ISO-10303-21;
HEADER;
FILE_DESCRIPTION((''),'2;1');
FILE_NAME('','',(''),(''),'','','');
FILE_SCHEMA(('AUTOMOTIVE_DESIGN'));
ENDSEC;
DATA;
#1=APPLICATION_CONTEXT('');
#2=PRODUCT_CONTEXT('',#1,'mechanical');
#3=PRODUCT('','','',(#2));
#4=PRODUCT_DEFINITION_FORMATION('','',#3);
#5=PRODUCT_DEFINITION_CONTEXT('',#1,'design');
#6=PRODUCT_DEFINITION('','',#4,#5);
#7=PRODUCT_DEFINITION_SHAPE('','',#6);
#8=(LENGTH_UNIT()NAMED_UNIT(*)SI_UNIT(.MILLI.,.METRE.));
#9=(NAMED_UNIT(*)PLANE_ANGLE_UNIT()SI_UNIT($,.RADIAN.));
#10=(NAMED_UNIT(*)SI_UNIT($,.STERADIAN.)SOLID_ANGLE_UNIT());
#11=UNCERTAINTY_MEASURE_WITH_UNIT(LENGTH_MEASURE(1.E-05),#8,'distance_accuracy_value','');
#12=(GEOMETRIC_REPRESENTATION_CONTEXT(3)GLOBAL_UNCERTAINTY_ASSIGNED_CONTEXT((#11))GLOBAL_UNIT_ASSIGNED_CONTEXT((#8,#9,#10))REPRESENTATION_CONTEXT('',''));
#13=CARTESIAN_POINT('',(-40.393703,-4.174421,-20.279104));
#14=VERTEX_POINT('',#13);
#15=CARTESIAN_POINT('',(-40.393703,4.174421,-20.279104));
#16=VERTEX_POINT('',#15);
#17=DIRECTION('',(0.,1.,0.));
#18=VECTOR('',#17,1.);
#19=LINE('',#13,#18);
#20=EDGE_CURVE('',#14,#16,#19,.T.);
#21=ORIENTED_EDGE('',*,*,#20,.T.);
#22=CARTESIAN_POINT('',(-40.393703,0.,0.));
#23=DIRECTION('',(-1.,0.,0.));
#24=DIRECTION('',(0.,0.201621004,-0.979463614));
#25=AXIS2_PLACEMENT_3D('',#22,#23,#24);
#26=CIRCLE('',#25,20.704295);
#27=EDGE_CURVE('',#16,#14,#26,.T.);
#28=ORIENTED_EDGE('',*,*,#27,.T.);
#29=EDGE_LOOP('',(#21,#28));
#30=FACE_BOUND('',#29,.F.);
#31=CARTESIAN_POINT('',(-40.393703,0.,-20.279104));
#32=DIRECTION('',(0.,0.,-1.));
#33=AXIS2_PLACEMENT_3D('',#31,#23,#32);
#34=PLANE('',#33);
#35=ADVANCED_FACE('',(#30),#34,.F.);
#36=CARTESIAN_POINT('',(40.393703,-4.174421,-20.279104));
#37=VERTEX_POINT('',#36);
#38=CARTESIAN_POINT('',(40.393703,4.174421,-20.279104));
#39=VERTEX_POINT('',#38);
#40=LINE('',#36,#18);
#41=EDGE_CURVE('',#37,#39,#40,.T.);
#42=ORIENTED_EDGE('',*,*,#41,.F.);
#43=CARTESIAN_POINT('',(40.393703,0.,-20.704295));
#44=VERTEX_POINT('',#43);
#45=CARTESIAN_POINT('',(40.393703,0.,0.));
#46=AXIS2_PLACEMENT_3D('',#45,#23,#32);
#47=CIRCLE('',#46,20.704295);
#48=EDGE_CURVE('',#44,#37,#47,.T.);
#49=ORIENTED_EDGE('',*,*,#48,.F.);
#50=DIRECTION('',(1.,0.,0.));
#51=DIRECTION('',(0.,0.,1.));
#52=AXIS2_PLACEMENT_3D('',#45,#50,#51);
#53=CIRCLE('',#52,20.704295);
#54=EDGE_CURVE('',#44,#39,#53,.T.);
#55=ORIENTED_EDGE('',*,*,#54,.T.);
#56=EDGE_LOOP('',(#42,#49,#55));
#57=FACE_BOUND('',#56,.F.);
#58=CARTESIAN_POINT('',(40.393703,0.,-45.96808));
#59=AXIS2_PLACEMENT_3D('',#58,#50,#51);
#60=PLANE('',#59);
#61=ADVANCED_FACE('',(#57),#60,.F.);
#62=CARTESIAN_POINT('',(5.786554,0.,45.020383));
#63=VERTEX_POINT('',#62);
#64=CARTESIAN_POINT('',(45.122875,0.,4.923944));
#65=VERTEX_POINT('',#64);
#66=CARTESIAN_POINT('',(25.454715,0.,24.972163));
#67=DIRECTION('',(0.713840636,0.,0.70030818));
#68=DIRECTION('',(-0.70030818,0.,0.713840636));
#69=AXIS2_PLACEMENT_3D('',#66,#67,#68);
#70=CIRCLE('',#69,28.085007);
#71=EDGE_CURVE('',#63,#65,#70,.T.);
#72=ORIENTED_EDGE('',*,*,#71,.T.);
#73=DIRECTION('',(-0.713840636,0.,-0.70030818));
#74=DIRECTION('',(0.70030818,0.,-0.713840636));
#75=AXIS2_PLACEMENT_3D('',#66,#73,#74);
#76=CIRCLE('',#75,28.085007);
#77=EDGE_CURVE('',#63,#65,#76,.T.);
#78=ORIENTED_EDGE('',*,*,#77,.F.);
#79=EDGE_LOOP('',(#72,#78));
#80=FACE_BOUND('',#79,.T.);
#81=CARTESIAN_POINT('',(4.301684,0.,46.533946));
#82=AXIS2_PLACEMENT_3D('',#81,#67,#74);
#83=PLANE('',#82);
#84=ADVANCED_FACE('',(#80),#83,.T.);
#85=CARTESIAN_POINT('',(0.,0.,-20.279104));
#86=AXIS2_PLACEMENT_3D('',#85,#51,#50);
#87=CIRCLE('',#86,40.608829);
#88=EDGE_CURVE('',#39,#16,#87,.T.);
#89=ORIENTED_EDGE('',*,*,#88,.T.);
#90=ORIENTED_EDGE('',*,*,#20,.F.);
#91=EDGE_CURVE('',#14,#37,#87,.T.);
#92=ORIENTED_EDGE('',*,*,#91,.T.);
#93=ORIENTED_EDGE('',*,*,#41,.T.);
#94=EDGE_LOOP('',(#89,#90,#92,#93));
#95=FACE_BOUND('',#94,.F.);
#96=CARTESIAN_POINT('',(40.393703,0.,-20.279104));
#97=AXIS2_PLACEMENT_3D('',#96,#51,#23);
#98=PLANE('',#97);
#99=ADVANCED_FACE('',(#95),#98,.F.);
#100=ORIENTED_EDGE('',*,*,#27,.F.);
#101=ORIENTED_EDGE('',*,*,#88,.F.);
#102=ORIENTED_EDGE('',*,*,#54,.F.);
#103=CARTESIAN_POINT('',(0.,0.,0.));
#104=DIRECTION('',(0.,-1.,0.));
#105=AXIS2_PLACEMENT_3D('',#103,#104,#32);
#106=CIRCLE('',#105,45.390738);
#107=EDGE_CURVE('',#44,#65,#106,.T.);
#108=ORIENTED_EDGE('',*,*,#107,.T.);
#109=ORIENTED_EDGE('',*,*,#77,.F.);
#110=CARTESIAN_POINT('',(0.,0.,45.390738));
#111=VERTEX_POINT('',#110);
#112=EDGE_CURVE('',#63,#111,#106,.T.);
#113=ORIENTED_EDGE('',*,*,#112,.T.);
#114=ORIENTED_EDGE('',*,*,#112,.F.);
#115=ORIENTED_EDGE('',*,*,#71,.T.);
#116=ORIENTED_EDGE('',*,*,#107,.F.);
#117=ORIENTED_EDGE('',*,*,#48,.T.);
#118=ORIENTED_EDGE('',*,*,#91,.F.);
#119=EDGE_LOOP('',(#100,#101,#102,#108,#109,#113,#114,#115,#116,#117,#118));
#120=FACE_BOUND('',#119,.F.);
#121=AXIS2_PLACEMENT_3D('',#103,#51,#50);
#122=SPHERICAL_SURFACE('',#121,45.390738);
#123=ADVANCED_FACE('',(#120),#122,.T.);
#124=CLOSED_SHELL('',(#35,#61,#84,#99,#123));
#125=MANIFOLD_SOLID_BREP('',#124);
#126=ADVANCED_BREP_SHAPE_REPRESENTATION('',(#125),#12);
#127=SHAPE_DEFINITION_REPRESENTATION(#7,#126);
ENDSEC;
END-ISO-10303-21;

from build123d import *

# Parameters (mm, degrees)
F4_DEPTH      = 45.391737605
F4_DEPTH_BACK = 45.391737605
F6_DEPTH      = 45.391737605
F7_DEPTH      = 45.391737605


with BuildPart() as f2:
    # F0 (on Front) → F2 (revolve)
    with BuildSketch(Plane.XZ):
        with BuildLine():
            Line((0, 45.390737605), (0, -45.390737605))
            ThreePointArc((0, -45.390737605), (45.390737605, 0), (0, 45.390737605))
        make_face()
    revolve(axis=Axis((0, 0, -0.1771636307), (0, 0, -1)))

    # F3 (on Front) → F4 (cut, two sides)
    with BuildSketch(Plane.XZ) as f4_sk:
        Polygon((0, -20.2791038901), (-40.3937026858, -20.2791038901), (-40.3937026858, -45.9680799395), (0, -45.9680799395), (40.3937026858, -45.9680799395), (40.3937026858, -20.2791038901), align=None)
    extrude(amount=-F4_DEPTH, mode=Mode.SUBTRACT)
    extrude(f4_sk.sketch, amount=F4_DEPTH_BACK, mode=Mode.SUBTRACT)

    # F5 (on Front) → F6 (cut, through all)
    with BuildSketch(Plane.XZ):
        Polygon((9.3581555411, 46.5339459479), (4.3016839772, 46.5339459479), (47.9137524962, 2.0791364368), (50.4419840872, 46.5339459479), align=None)
    extrude(amount=F6_DEPTH, mode=Mode.SUBTRACT)

    # F5 (on Front) → F7 (cut, through all)
    with BuildSketch(Plane.XZ):
        Polygon((9.3581555411, 46.5339459479), (4.3016839772, 46.5339459479), (47.9137524962, 2.0791364368), (50.4419840872, 46.5339459479), align=None)
    extrude(amount=-F7_DEPTH, mode=Mode.SUBTRACT)


solid = f2.part
